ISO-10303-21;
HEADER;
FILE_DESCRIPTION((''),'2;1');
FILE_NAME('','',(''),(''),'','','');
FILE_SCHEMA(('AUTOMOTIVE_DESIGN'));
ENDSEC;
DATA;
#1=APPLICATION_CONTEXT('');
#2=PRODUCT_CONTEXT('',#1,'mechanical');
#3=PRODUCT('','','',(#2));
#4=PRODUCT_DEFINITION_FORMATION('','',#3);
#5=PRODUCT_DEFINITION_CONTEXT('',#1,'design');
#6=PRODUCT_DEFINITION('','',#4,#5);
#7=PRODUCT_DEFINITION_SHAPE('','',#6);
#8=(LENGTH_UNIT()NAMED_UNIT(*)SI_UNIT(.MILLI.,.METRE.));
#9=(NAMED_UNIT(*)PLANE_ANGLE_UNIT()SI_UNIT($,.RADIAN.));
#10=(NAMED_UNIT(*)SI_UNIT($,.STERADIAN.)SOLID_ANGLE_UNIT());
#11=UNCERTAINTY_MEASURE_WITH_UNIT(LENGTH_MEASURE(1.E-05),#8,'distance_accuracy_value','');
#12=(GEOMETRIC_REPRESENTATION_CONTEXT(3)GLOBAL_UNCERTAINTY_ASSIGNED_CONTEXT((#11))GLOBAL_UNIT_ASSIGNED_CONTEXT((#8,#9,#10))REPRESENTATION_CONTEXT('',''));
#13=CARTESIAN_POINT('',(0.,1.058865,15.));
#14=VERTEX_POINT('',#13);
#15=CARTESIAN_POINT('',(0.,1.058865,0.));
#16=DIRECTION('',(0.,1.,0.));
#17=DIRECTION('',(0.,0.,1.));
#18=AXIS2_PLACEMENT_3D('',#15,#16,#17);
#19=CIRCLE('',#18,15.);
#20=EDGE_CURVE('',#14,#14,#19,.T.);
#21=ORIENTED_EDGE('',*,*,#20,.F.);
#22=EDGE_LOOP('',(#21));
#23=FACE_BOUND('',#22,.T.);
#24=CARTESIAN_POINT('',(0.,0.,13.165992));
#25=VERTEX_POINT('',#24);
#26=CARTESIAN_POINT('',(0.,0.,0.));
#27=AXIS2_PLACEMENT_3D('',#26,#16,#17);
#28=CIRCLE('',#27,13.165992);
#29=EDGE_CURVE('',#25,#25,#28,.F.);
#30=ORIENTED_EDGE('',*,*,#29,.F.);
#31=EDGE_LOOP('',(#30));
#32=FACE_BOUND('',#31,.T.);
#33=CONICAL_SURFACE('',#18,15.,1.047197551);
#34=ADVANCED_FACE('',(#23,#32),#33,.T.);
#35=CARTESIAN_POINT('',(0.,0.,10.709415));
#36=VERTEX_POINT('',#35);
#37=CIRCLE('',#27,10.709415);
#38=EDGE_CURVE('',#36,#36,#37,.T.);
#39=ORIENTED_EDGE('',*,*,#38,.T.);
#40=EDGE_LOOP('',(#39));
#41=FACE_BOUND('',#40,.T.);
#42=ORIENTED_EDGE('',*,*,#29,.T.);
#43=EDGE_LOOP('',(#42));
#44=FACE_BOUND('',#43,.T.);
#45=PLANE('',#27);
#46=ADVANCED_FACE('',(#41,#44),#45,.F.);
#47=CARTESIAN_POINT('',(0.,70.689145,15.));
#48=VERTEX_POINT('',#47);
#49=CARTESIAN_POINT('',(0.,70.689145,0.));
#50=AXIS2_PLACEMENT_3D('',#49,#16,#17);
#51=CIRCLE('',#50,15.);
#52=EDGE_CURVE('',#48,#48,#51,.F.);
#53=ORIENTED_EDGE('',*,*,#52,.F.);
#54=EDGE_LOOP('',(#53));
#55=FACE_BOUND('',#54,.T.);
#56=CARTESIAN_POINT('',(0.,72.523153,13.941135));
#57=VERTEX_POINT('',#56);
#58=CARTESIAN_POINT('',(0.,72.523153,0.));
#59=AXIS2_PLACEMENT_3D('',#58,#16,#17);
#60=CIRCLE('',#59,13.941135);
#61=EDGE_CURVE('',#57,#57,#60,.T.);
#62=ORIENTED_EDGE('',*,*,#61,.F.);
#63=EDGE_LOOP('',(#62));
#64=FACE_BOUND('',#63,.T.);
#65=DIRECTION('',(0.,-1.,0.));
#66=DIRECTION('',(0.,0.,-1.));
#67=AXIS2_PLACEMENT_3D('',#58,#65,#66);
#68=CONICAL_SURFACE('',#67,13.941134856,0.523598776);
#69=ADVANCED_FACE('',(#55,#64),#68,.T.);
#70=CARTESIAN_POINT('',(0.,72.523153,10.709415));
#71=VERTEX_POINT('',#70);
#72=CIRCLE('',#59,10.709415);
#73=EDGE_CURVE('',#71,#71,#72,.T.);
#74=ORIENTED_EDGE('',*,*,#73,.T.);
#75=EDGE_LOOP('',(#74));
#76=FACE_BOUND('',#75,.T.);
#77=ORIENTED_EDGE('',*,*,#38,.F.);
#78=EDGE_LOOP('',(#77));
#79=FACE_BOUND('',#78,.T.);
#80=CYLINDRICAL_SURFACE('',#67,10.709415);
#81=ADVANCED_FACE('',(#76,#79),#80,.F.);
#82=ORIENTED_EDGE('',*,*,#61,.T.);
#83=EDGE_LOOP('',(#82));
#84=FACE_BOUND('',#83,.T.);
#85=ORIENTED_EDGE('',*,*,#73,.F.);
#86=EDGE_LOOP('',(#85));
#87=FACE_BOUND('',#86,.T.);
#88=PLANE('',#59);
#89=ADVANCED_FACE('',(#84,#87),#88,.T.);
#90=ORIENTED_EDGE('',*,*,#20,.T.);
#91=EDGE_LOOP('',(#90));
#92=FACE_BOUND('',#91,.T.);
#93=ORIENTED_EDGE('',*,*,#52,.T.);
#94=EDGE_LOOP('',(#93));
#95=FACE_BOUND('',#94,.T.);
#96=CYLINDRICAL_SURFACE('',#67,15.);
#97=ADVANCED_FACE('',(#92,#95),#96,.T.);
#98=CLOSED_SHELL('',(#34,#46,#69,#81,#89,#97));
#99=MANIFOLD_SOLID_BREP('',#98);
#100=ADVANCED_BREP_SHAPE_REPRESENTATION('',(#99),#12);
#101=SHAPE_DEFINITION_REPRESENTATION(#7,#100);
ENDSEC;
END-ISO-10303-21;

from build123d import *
from OCP.BRepFilletAPI import BRepFilletAPI_MakeChamfer

# Parameters (mm, degrees)
SKETCH1_R           = 15
BOSS_EXTRUDE1_DEPTH = 72.523152783
SKETCH2_R           = 10.709414976
CUT_EXTRUDE1_DEPTH  = 76.561946041
CHAMFER1_SIZE       = 1.834008229
CHAMFER1_SIZE2      = 1.058865144


with BuildPart() as part:
    # Sketch1 → Boss-Extrude1 (new body)
    with BuildSketch(Plane(origin=(0, 0, 0), x_dir=(1, 0, 0), z_dir=(0, 1, 0))):
        Circle(SKETCH1_R)
    extrude(amount=BOSS_EXTRUDE1_DEPTH)

    # Sketch2 → Cut-Extrude1 (cut, through all)
    with BuildSketch(Plane(origin=(0, 0, 0), x_dir=(1, 0, 0), z_dir=(0, 1, 0))):
        Circle(SKETCH2_R)
    extrude(amount=CUT_EXTRUDE1_DEPTH, mode=Mode.SUBTRACT)

    # Chamfer1: one chamfer whose edges measure the first distance from different faces: ONE call of the kernel's chamfer builder (chamfer() names one face for all edges)
    chamfer1_edges_1 = [part.edges().sort_by_distance(p)[0] for p in [
        (-15, 72.523152783, 0),
    ]]
    chamfer1_side_1 = [part.faces().sort_by_distance(p)[0] for p in [
        (-15, 36.261576391, 0),
    ]]
    chamfer1_edges_2 = [part.edges().sort_by_distance(p)[0] for p in [
        (-15, 0, 0),
    ]]
    chamfer1_side_2 = [part.faces().sort_by_distance(p)[0] for p in [
        (-14.575735931, 0, 0),
    ]]
    chamfer1 = BRepFilletAPI_MakeChamfer(part.part.solid().wrapped)
    for e in chamfer1_edges_1:
        chamfer1.Add(CHAMFER1_SIZE, CHAMFER1_SIZE2, e.wrapped, chamfer1_side_1[0].wrapped)  # the first distance lies on this face
    for e in chamfer1_edges_2:
        chamfer1.Add(CHAMFER1_SIZE, CHAMFER1_SIZE2, e.wrapped, chamfer1_side_2[0].wrapped)  # the first distance lies on this face
    add(Compound.cast(chamfer1.Shape()), mode=Mode.REPLACE)


solid = part.part
